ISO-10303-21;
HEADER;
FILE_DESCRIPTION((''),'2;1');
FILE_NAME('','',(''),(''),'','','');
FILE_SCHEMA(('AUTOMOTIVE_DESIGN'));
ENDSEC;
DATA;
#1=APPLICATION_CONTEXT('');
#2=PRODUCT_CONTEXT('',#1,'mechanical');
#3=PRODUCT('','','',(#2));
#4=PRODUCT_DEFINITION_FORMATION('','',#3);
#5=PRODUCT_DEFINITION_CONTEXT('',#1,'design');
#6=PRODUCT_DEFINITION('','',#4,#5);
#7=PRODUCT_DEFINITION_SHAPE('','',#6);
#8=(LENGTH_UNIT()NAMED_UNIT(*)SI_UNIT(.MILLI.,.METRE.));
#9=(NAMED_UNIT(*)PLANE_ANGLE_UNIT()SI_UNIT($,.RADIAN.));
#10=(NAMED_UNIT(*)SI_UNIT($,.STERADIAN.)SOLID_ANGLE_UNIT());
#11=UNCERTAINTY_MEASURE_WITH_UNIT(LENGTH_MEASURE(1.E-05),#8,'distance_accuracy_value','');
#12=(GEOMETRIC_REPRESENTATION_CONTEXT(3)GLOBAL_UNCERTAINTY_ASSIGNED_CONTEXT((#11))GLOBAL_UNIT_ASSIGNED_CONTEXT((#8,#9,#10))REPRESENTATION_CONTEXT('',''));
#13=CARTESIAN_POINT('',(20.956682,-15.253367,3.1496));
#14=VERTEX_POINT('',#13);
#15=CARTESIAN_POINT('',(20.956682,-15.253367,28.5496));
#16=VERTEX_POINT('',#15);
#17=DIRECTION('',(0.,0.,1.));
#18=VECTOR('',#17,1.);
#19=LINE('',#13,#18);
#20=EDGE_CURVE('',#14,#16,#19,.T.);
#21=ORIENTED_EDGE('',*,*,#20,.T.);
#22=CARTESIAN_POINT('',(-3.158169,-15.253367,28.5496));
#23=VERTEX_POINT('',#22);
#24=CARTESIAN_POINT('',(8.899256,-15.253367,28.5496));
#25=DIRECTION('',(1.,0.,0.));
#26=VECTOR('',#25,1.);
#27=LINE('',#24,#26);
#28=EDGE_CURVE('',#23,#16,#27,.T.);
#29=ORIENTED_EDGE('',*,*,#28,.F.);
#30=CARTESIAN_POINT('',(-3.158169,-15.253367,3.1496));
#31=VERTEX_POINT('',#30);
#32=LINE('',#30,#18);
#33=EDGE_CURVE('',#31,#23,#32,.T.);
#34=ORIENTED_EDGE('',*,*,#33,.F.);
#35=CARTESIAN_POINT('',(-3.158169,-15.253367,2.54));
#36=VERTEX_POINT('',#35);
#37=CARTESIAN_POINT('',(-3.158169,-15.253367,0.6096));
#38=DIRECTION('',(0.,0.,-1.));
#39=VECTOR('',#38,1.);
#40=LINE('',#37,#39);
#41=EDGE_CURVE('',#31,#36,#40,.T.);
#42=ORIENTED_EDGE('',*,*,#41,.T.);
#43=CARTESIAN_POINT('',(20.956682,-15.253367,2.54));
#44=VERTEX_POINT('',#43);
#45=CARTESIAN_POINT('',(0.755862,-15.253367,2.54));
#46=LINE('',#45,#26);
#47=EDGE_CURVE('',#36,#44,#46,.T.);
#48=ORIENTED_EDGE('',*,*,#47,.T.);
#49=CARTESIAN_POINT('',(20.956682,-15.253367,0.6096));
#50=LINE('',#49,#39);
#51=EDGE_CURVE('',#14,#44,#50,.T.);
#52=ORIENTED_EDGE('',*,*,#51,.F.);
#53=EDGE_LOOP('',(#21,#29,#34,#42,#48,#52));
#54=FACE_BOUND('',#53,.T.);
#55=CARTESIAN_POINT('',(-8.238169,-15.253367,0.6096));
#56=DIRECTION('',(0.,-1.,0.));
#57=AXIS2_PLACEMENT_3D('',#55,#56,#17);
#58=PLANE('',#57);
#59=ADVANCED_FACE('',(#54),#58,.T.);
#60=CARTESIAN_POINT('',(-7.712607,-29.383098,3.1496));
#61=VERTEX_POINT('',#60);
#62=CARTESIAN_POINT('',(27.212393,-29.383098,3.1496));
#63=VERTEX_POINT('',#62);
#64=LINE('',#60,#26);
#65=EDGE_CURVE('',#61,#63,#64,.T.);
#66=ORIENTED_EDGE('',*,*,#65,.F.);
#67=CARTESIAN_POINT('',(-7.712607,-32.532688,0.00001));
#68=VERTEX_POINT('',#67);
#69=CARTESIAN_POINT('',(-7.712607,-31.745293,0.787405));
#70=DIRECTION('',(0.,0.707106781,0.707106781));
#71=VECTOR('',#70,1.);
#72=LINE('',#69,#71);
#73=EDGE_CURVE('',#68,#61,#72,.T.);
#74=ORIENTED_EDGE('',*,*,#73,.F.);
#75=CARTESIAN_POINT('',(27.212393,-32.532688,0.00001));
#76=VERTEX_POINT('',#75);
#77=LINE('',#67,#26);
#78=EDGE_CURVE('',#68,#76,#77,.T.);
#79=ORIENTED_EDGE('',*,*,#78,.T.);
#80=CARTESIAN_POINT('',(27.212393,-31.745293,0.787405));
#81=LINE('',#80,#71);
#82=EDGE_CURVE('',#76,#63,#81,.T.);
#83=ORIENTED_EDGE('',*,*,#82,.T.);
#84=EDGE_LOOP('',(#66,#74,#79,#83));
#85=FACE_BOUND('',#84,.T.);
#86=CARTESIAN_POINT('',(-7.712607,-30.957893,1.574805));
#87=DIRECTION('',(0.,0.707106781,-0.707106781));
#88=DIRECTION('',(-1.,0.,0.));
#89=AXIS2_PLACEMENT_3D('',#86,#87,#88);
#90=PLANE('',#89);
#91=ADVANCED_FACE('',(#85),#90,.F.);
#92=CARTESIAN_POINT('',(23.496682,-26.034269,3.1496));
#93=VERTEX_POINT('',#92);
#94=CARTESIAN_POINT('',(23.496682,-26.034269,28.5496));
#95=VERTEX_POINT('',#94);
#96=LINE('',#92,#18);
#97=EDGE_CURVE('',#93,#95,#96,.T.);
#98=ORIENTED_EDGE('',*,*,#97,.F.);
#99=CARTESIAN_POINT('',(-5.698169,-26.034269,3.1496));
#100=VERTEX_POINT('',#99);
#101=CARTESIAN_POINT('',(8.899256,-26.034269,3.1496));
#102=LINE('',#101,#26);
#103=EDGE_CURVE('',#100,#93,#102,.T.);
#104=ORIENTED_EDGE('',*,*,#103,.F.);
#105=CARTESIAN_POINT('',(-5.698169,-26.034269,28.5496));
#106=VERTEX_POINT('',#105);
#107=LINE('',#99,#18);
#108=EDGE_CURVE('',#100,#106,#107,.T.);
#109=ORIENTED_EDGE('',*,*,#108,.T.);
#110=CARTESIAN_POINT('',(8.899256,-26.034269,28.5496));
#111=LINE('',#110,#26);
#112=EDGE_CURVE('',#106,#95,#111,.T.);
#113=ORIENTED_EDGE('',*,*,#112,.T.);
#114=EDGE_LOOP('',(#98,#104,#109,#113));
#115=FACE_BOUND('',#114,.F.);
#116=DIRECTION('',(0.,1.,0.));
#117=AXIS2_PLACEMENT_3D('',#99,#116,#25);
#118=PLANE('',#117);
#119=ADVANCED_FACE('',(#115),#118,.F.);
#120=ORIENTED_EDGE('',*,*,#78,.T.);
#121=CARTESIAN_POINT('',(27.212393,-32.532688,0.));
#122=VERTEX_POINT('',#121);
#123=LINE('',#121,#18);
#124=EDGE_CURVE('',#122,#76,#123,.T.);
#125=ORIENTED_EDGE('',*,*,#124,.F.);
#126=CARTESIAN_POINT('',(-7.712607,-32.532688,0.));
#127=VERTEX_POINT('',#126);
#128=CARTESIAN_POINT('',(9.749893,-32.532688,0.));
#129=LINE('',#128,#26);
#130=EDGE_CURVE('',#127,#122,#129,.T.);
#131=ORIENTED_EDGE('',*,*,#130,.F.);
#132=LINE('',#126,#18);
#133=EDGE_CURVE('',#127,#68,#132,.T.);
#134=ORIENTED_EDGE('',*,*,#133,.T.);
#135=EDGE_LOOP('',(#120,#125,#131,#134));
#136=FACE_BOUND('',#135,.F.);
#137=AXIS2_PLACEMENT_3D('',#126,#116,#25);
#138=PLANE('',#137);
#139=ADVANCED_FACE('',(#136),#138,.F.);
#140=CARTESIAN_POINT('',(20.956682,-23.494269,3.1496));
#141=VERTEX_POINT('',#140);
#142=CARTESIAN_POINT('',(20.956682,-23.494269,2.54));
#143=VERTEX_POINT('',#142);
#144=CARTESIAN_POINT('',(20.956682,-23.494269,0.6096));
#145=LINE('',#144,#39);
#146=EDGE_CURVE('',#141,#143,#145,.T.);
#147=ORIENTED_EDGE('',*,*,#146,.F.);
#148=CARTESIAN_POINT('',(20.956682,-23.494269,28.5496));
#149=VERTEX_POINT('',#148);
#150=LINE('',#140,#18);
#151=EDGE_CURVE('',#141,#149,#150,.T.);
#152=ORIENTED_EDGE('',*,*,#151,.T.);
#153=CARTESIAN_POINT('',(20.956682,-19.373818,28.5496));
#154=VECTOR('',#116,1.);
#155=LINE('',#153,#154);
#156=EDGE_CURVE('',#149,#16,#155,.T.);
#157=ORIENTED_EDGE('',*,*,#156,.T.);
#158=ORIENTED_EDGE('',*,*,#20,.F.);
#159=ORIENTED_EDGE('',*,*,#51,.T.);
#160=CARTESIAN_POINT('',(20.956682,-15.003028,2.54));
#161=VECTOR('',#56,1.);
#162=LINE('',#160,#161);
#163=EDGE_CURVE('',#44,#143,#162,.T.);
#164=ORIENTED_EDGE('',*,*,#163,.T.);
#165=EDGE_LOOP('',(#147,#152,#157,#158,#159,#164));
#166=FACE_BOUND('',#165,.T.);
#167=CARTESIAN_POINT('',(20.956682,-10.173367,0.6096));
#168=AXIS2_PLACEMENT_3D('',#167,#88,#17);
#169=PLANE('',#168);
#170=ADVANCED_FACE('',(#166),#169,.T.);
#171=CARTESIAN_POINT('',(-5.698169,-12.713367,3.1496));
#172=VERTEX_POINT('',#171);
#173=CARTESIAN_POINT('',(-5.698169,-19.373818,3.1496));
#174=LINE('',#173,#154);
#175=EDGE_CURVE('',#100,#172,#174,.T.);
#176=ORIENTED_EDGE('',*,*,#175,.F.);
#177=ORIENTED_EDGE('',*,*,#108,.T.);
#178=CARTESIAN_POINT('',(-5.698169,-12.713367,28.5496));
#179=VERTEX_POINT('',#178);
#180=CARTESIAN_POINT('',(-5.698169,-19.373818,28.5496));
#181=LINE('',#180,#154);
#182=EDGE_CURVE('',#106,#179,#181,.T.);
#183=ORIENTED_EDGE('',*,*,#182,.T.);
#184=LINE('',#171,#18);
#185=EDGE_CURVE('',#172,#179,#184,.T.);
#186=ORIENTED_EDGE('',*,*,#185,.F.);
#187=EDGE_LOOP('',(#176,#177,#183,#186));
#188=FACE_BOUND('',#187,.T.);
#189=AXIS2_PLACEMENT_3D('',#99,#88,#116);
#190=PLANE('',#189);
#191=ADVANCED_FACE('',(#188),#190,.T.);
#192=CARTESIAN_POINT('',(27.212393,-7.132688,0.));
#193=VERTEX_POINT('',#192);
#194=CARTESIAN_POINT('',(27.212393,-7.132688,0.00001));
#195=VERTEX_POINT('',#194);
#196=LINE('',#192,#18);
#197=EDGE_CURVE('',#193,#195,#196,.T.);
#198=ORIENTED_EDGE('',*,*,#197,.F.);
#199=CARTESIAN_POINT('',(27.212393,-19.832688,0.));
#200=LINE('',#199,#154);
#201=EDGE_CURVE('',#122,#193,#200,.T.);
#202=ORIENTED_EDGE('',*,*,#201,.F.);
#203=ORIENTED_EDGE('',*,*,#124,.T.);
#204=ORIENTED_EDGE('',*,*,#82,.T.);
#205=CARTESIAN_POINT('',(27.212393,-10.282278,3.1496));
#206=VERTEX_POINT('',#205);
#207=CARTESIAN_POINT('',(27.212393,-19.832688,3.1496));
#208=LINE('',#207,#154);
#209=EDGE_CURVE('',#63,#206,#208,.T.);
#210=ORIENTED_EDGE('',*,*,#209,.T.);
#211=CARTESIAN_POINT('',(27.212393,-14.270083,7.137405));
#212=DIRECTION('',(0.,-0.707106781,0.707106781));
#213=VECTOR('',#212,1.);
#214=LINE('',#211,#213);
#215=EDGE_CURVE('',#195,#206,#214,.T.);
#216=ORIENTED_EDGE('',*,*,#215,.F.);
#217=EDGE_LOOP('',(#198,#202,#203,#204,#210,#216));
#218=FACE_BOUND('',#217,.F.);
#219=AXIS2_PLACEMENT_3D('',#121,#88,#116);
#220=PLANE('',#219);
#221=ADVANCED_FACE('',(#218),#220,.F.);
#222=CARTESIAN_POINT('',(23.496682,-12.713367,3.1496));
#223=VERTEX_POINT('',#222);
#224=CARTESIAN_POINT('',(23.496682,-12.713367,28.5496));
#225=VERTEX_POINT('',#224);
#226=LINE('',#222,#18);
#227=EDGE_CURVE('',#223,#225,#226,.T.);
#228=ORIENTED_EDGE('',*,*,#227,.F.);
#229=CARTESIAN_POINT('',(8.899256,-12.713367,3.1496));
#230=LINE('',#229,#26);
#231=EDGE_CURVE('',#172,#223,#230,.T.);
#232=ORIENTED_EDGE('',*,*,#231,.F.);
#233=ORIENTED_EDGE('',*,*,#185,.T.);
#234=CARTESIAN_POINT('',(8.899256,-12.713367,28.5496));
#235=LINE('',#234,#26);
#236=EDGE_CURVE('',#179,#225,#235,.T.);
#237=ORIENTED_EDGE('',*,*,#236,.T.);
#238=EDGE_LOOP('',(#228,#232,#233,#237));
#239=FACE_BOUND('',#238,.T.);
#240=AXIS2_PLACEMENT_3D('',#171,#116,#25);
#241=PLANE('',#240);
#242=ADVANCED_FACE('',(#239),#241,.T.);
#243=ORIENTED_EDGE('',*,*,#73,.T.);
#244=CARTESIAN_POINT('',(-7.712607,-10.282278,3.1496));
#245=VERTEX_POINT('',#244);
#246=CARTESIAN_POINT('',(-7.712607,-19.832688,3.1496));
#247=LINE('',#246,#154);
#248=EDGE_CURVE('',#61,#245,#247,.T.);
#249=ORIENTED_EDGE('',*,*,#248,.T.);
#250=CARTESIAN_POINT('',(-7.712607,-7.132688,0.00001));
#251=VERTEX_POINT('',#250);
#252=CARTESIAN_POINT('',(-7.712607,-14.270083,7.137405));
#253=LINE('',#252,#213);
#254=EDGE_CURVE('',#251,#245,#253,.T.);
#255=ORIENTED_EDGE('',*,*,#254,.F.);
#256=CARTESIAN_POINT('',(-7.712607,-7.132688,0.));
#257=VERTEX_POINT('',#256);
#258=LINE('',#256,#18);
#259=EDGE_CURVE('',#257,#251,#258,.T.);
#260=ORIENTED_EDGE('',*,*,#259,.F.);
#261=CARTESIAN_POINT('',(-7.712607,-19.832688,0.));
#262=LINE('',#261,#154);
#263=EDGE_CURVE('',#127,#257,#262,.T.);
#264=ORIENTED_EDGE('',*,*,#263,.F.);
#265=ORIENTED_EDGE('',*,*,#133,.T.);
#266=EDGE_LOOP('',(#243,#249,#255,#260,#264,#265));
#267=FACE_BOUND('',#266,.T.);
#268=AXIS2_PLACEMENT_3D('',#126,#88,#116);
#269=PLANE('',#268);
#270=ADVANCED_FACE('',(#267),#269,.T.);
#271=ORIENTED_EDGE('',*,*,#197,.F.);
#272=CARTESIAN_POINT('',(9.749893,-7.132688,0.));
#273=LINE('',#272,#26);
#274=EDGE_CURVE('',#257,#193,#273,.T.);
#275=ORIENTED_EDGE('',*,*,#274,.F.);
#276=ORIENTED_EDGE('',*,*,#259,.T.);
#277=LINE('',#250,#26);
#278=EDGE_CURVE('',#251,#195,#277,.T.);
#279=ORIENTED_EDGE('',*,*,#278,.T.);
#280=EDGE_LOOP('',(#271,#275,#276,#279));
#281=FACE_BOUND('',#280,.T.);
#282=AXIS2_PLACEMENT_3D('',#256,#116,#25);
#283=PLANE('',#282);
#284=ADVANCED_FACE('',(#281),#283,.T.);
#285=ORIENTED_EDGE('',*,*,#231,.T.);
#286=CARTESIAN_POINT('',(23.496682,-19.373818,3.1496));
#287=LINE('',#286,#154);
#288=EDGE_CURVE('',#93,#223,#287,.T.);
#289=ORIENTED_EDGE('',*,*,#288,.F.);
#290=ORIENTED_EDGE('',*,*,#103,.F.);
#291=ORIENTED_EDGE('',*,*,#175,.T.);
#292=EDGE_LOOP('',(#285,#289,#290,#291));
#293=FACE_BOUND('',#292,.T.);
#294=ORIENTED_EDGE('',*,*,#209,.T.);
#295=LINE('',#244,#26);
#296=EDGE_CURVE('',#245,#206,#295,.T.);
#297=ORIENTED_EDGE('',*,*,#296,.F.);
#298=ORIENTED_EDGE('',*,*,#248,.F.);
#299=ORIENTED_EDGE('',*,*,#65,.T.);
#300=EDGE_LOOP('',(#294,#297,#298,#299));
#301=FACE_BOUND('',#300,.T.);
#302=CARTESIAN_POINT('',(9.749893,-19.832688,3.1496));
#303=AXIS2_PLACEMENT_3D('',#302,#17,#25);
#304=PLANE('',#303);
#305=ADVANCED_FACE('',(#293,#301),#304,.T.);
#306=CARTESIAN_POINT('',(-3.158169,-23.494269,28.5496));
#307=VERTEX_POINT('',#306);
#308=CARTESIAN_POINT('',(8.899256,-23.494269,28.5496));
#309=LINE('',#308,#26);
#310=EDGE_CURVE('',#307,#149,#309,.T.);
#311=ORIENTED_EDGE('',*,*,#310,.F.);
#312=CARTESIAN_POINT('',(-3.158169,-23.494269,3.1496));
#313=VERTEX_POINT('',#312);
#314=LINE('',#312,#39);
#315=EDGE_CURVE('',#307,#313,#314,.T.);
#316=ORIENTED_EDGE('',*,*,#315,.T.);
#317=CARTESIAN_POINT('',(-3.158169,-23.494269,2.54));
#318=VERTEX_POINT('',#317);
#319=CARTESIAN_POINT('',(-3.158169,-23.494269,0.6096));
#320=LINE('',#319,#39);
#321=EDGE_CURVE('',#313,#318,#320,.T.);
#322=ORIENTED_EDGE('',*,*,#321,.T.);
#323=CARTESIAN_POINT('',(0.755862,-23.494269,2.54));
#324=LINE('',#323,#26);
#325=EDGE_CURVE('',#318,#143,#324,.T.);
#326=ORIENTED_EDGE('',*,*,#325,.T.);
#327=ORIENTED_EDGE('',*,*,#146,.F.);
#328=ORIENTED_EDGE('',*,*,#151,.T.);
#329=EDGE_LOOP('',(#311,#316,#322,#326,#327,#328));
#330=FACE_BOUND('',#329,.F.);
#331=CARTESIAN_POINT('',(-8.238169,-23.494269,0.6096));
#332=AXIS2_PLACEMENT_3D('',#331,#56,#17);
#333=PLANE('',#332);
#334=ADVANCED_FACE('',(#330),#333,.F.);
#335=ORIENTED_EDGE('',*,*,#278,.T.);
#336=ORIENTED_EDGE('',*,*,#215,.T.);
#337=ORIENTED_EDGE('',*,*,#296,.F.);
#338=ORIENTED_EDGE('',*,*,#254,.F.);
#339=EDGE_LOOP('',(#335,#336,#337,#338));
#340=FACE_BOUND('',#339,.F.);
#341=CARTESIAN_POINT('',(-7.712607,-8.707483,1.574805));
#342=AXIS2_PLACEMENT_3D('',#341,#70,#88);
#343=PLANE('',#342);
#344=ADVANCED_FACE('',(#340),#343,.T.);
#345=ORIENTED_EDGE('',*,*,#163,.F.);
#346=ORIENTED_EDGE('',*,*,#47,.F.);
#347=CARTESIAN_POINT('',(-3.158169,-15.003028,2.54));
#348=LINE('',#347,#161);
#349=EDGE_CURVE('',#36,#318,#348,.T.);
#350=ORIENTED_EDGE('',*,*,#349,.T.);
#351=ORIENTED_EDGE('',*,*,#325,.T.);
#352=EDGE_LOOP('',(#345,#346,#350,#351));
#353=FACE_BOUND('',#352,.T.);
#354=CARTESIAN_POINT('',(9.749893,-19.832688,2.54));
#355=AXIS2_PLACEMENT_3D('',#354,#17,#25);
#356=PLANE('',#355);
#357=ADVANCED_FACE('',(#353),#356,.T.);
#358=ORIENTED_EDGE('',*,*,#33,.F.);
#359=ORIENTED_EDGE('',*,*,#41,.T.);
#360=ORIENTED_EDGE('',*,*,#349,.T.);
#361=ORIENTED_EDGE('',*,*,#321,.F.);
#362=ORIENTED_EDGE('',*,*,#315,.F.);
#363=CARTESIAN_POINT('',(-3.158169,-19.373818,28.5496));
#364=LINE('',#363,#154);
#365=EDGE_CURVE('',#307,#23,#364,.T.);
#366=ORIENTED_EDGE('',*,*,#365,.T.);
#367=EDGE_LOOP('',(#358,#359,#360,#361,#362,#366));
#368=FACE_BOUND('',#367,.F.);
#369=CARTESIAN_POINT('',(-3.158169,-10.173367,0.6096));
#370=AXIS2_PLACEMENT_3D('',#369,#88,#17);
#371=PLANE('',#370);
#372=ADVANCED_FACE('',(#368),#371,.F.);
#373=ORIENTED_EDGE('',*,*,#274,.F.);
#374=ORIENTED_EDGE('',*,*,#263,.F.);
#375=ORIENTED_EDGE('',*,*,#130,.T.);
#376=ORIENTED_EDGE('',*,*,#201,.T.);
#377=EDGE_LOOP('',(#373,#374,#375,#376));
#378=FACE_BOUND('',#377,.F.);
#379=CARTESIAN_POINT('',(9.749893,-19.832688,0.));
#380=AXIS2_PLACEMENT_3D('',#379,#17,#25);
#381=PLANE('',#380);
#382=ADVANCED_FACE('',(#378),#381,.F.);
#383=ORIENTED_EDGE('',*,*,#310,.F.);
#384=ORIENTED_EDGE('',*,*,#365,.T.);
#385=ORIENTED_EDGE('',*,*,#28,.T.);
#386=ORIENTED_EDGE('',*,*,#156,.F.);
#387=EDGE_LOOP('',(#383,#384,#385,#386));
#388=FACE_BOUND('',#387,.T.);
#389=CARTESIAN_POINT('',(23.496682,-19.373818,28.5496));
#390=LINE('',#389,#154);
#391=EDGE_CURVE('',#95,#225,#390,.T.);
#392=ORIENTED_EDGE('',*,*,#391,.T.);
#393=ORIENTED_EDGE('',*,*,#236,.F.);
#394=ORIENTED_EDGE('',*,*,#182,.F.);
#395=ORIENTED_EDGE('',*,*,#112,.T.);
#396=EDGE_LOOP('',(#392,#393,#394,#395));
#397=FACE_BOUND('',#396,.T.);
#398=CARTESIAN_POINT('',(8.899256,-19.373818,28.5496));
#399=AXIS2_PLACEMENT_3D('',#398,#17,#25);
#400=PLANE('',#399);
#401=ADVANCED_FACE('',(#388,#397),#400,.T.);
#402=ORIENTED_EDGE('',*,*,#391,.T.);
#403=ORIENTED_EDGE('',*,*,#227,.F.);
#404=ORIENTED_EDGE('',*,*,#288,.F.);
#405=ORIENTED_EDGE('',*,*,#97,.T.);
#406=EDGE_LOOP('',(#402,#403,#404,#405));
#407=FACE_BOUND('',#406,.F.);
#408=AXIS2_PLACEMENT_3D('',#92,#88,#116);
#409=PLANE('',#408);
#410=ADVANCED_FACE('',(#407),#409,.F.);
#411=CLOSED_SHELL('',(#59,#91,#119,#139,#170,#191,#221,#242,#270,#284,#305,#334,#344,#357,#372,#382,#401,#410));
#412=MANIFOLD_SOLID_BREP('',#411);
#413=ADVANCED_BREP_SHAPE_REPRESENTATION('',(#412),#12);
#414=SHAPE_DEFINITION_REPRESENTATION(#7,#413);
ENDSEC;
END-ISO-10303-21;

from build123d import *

# Parameters (mm, degrees)
F0_W        = 34.925
F0_H        = 25.4
F1_DEPTH    = 3.1496
F2_SIZE     = 3.14959
F3_W        = 29.1948509403
F3_H        = 13.3209023625
F4_DEPTH    = 25.4
F5_T        = 2.54
F5_T3_DEPTH = 34.2748509403
F5_T5_DEPTH = 18.4009023625


# Not quite as in the source:
# - a fillet or chamfer is up to 0.001 mm smaller than in the source, because OpenCascade refuses the exact size
# - a shell that OpenCascade refuses in one call is made with other operations: the cavity is built on its own and cut out


with BuildPart() as f1:
    # F0 (on Top) → F1 (new body)
    with BuildSketch(Plane.XY):
        with Locations((9.7498925388, -19.8326882303)):
            Rectangle(F0_W, F0_H)
    extrude(amount=F1_DEPTH)

    # F2 (size 3.1496 in the source; OpenCascade refuses exactly that, so slightly less here)
    f2_edges = [f1.edges().sort_by_distance(p)[0] for p in [
        (9.749893, -32.532688, 3.1496),
        (9.749893, -7.132688, 3.1496),
    ]]
    chamfer(f2_edges, length=F2_SIZE)

    # F3 (on face) → F4 (join)
    with BuildSketch(Plane.XY.offset(3.1496)):
        with Locations((8.8992563542, -19.3738183007)):
            Rectangle(F3_W, F3_H)
    extrude(amount=F4_DEPTH)

    # F5: shell of thickness 2.54, made by hand


with BuildPart() as f5_core1:
    # F5_t2: copy of F1
    add(f1.part)

    # the walls: a layer under each face that stays
    f5_faces = [f5_core1.faces().sort_by_distance(p)[0] for p in [
        (27.2123925388, -19.8326882303, 1.5748),
        (9.7498925388, -32.5326882303, 5e-06),
        (9.7498925388, -30.9578932303, 1.574805),
        (9.7498925388, -19.8326882303, 0),
        (-1.8917741279, -26.1996282303, 3.1496),
        (9.7498925388, -7.1326882303, 5e-06),
        (9.7498925388, -8.7074832303, 1.574805),
        (-7.7126074612, -19.8326882303, 1.5748),
        (8.8992563542, -12.7133671194, 15.8496),
        (-5.6981691159, -19.3738183007, 15.8496),
        (8.8992563542, -26.0342694819, 15.8496),
        (23.4966818243, -19.3738183007, 15.8496),
    ]]
    thicken(f5_faces, amount=-F5_T, mode=Mode.SUBTRACT)

    # F5_s4 → F5_t3 (cut)
    with BuildSketch(Plane.YZ.offset(-8.2381691159)):
        Polygon((-12.6879671194, 3.175), (-12.7133671194, 0.6096), (-15.2533671194, 0.6096), (-15.2533671194, 3.1496), align=None)
        Polygon((-26.0596694819, 3.175), (-26.0342694819, 0.6096), (-23.4942694819, 0.6096), (-23.4942694819, 3.1496), align=None)
    extrude(amount=F5_T3_DEPTH, mode=Mode.SUBTRACT)

    # F5_s6 → F5_t5 (cut)
    with BuildSketch(Plane.XZ.offset(10.1733671194)):
        Polygon((-5.7235691159, 3.175), (-5.6981691159, 0.6096), (-3.1581691159, 0.6096), (-3.1581691159, 3.1496), align=None)
        Polygon((23.5220818243, 3.175), (23.4966818243, 0.6096), (20.9566818243, 0.6096), (20.9566818243, 3.1496), align=None)
    extrude(amount=F5_T5_DEPTH, mode=Mode.SUBTRACT)


with BuildPart() as f1_1:
    add(f1.part)

    # what is left inside the walls is the cavity
    f5_cavity = [f5_core1.part.solids().sort_by_distance(p)[0] for p in [
        (12.918398, -15.278767, 15.5448),
    ]]
    add(f5_cavity, mode=Mode.SUBTRACT)


solid = f1_1.part
